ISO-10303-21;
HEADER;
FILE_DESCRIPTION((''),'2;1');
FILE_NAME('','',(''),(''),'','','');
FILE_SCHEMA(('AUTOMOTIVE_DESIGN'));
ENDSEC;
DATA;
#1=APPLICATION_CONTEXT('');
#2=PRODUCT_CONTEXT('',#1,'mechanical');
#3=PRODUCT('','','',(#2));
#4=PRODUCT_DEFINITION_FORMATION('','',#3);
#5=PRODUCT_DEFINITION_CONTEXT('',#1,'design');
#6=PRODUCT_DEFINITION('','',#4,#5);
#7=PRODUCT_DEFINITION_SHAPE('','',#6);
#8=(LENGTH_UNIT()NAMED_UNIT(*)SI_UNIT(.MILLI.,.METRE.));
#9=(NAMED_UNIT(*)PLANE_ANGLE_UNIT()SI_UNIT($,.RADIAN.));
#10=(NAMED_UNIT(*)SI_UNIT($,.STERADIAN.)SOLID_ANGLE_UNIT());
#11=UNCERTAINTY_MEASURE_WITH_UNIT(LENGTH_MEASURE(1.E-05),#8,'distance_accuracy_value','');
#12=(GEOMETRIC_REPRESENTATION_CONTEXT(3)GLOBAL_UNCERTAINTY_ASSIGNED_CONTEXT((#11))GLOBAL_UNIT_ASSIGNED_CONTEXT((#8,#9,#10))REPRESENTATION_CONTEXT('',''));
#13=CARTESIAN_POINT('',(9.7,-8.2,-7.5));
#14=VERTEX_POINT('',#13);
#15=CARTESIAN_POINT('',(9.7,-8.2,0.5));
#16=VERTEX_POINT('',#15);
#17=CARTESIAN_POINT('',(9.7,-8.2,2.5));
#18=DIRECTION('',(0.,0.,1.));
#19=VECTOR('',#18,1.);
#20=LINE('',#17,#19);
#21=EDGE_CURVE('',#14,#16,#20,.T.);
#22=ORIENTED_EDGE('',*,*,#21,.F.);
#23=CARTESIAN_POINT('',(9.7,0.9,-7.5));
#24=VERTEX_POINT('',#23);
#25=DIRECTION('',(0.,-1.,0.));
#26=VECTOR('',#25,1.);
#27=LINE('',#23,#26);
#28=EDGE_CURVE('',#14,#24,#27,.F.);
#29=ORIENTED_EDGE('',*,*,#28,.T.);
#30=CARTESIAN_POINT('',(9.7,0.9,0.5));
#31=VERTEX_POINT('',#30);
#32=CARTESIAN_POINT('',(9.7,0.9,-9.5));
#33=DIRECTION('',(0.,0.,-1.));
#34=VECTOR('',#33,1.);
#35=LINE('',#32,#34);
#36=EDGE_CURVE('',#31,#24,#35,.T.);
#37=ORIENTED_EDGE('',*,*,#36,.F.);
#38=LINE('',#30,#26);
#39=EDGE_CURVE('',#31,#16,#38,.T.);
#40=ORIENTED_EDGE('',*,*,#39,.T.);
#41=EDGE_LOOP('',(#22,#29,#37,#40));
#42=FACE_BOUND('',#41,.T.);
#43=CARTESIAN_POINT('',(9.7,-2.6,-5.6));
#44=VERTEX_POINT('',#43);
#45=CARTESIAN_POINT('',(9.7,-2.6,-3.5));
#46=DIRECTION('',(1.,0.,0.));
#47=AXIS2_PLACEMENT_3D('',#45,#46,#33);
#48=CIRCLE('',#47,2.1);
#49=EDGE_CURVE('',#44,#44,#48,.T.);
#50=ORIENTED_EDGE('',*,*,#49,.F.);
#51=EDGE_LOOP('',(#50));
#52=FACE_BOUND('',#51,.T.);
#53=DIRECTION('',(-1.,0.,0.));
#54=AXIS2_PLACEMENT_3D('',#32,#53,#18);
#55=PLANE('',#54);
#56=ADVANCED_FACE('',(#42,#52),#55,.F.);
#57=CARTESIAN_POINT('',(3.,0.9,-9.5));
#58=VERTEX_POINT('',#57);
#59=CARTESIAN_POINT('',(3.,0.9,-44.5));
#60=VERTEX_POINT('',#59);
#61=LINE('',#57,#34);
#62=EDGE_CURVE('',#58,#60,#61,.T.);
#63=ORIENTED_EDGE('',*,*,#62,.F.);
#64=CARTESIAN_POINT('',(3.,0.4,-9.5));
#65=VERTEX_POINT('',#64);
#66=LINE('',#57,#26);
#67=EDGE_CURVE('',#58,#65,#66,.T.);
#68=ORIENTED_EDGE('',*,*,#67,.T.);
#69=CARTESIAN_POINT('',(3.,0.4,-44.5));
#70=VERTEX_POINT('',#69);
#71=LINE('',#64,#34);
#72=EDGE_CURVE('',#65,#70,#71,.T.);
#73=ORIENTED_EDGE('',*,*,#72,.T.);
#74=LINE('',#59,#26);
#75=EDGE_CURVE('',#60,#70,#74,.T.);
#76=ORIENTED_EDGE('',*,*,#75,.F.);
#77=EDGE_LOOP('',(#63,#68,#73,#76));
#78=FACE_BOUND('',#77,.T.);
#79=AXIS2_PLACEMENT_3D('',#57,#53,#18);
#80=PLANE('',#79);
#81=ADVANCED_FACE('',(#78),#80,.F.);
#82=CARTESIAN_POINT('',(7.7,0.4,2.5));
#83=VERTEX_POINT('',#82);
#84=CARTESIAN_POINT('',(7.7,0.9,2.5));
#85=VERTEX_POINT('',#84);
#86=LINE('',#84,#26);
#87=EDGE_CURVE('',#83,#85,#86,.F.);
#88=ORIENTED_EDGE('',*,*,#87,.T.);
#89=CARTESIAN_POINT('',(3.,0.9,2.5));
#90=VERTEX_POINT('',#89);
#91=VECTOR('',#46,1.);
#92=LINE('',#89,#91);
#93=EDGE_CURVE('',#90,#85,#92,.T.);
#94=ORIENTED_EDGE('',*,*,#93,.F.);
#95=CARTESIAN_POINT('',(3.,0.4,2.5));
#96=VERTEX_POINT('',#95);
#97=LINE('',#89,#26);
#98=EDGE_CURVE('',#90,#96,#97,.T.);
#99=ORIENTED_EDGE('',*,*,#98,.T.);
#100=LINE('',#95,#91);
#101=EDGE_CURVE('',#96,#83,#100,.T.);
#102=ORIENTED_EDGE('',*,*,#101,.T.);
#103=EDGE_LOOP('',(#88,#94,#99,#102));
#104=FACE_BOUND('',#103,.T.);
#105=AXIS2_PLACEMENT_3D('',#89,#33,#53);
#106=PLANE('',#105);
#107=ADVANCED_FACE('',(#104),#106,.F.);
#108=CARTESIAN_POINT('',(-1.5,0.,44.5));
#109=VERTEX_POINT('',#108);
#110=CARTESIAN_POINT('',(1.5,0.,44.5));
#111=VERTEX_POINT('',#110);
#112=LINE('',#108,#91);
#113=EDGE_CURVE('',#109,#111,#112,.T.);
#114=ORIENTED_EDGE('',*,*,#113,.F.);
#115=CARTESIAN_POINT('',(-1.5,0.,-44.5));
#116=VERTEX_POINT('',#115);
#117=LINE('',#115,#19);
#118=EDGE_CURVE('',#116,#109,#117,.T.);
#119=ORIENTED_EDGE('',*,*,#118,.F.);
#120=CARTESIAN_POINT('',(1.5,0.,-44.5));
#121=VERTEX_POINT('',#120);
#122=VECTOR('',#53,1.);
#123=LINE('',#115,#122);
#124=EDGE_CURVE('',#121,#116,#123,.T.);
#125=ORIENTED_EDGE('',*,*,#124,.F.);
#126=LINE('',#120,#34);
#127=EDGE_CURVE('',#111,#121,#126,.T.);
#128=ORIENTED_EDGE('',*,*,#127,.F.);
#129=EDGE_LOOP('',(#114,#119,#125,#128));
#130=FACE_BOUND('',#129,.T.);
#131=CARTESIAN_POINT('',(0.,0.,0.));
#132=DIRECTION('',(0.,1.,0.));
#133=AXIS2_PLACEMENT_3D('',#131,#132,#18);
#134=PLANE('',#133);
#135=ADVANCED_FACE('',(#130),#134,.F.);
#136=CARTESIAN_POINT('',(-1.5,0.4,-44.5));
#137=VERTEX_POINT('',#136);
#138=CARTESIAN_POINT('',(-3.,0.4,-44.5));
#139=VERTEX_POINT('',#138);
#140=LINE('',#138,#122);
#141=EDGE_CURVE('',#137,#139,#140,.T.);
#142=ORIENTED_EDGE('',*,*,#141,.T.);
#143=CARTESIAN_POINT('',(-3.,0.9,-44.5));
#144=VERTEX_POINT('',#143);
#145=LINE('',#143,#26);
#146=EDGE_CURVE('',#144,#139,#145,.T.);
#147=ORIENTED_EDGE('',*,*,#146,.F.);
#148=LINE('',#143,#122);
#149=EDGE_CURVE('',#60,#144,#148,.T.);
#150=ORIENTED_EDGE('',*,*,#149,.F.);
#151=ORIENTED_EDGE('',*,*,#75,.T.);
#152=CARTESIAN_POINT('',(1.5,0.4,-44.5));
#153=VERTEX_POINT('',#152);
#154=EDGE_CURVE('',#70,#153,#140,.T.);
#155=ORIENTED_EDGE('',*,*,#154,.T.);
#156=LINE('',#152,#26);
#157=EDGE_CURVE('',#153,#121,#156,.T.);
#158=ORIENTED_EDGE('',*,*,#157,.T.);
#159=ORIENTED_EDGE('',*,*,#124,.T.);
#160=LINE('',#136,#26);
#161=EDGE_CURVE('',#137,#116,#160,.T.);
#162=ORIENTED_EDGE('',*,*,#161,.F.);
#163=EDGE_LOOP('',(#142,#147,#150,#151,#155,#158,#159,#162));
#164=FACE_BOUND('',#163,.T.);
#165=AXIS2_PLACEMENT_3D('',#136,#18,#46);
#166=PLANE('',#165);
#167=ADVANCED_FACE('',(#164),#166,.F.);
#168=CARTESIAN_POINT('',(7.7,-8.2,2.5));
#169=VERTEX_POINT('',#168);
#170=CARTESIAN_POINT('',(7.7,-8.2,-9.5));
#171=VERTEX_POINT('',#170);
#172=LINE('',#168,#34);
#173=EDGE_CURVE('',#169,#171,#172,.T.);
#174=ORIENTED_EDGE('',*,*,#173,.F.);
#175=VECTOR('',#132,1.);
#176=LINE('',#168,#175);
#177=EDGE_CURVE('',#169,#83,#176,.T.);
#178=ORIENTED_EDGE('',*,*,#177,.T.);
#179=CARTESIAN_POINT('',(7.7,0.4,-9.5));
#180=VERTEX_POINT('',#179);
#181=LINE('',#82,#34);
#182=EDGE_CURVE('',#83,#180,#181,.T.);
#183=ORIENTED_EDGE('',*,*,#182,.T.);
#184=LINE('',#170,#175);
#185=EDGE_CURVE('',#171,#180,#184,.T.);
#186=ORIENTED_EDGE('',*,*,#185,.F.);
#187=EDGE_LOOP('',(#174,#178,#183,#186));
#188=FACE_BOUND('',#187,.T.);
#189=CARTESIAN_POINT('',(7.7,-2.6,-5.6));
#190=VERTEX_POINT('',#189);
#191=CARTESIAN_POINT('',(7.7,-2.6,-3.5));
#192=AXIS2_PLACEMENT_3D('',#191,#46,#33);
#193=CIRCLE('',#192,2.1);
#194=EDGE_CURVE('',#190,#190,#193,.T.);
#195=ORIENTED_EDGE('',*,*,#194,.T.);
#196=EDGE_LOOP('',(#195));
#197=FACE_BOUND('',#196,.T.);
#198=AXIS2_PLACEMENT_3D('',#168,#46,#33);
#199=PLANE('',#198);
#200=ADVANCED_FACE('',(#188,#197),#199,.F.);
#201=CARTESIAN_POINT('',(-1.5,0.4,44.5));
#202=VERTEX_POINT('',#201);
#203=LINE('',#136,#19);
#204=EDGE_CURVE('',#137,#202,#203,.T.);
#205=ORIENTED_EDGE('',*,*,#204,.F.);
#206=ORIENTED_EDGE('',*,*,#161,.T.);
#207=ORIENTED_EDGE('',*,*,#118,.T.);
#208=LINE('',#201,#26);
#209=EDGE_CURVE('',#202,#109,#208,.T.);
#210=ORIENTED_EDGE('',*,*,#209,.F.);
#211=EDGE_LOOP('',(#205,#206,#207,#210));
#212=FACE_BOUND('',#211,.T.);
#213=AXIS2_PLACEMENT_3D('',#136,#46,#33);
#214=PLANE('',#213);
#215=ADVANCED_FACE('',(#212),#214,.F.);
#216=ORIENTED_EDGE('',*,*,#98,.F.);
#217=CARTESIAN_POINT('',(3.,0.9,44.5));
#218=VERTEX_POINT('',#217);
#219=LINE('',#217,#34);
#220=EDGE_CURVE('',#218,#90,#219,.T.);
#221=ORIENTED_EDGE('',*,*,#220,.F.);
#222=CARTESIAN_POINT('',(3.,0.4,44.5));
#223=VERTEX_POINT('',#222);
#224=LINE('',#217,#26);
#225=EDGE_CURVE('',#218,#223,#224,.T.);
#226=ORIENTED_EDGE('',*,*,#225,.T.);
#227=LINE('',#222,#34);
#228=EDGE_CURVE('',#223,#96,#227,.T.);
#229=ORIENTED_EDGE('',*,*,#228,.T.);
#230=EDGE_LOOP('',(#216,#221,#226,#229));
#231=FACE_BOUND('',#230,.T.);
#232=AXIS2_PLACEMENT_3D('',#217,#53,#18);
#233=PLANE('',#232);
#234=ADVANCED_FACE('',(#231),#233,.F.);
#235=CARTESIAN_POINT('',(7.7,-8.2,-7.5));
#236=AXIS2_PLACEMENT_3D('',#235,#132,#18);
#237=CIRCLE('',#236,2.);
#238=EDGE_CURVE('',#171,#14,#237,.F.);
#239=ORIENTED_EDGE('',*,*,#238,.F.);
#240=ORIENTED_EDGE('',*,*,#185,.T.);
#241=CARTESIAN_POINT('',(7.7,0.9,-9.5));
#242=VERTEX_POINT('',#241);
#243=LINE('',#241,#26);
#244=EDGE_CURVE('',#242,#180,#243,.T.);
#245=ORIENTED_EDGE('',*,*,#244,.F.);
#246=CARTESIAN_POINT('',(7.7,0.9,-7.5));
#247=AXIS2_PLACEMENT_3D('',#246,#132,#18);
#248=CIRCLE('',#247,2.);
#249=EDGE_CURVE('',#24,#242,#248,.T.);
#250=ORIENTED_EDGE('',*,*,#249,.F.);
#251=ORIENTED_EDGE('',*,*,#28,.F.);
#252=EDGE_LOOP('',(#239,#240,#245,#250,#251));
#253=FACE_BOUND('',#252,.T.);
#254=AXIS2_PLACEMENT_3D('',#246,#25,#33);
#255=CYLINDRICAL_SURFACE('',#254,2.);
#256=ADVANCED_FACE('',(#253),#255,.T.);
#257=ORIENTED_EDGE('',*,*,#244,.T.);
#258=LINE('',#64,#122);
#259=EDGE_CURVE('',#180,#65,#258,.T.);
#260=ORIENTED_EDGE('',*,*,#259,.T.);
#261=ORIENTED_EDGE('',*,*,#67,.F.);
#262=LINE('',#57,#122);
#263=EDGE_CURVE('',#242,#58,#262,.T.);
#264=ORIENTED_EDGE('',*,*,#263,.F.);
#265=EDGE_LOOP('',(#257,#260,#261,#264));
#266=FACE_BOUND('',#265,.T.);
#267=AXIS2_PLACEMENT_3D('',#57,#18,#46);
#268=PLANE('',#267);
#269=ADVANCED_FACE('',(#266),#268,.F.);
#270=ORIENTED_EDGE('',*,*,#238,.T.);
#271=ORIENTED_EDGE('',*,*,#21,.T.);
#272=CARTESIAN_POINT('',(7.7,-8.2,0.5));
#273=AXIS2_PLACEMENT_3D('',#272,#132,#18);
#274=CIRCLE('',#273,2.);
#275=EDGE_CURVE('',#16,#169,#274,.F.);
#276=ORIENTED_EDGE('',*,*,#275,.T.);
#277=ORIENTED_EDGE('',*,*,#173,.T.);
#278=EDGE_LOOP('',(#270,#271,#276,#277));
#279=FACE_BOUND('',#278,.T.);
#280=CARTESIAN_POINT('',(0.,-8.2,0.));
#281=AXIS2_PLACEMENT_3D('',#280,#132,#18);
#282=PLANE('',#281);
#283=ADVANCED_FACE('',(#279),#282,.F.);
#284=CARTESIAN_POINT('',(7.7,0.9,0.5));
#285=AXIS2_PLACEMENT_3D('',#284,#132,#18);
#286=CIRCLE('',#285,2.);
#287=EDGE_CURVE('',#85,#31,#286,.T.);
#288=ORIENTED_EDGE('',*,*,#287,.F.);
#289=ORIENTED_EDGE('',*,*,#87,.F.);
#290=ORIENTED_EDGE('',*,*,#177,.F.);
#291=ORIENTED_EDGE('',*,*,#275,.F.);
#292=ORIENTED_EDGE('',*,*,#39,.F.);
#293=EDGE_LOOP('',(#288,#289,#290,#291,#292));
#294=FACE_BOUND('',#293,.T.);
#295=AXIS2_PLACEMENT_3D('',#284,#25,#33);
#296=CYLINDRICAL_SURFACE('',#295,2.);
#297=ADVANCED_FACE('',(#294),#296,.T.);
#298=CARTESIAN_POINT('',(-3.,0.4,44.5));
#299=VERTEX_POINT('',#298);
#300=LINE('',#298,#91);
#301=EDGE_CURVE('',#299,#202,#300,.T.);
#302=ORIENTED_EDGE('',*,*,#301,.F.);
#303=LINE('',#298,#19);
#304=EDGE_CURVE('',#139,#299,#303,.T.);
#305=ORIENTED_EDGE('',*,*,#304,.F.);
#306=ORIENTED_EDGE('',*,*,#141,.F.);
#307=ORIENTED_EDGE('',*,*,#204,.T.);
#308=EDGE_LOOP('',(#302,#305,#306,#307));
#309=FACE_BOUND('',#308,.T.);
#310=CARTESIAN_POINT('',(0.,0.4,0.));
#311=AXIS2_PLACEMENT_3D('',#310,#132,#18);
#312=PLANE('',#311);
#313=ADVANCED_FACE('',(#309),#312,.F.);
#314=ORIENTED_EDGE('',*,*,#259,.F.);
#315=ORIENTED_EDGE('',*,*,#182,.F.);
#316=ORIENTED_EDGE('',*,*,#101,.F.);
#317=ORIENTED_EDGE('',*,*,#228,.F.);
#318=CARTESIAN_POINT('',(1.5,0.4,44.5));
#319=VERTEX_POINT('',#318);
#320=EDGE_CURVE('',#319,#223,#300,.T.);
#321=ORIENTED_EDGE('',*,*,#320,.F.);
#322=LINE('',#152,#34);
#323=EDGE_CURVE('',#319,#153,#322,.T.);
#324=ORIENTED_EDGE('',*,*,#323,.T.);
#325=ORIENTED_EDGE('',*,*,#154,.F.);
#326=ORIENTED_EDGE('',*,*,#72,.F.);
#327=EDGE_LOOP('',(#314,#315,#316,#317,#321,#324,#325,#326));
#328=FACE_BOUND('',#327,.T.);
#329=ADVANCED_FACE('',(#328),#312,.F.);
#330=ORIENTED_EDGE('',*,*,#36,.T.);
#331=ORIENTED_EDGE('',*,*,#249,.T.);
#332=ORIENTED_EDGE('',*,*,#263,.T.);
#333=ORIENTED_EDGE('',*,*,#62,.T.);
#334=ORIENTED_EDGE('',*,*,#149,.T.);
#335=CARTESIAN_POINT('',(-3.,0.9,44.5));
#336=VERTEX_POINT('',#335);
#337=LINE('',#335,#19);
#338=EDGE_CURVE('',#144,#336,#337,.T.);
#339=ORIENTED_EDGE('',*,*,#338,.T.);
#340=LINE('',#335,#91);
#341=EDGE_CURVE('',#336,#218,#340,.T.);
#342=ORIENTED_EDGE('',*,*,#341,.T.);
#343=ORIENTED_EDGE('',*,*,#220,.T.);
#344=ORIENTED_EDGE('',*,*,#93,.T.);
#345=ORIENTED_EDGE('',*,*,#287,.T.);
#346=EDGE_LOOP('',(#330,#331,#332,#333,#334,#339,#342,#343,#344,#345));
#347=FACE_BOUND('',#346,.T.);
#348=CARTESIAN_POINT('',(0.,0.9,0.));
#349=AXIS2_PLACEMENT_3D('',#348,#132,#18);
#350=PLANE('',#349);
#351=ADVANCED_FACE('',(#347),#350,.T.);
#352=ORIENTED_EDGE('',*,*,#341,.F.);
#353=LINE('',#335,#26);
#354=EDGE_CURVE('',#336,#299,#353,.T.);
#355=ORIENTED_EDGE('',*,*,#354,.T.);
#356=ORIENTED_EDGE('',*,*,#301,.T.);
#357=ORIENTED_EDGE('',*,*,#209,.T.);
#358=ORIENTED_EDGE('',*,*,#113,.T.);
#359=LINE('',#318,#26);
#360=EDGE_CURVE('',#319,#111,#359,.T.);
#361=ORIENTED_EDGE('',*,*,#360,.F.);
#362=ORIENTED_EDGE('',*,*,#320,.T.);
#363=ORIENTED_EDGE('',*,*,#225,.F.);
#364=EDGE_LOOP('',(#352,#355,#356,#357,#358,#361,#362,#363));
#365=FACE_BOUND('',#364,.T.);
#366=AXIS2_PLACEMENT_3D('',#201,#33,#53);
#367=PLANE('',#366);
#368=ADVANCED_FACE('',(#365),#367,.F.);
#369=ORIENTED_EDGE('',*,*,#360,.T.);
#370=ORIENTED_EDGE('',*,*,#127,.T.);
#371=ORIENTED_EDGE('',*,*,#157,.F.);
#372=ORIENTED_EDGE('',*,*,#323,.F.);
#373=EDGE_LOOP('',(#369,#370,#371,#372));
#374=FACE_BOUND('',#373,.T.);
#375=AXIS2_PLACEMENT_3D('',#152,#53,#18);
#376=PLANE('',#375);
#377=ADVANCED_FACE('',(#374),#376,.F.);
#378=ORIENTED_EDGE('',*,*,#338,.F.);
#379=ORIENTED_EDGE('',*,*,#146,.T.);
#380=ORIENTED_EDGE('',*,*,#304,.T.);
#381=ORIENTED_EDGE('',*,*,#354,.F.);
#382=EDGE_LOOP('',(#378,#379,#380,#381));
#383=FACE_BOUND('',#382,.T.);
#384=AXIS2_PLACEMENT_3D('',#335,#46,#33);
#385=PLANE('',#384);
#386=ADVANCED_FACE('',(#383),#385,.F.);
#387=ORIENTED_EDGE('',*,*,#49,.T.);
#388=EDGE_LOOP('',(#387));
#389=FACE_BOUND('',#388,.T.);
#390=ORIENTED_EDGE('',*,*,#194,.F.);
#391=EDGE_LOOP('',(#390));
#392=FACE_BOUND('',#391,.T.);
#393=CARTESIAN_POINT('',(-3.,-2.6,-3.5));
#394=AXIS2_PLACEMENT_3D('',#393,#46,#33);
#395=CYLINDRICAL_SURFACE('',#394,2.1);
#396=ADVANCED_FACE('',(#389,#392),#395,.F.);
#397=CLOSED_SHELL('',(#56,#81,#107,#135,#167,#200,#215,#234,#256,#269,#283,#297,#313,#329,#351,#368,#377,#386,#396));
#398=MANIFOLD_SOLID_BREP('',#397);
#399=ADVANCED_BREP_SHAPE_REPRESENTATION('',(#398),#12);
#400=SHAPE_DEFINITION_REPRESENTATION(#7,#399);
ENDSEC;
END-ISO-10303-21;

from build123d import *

# Parameters (mm, degrees)
SKETCH1_W           = 3
SKETCH1_H           = 89
BOSS_EXTRUDE1_DEPTH = 0.4
BOSS_EXTRUDE2_DEPTH = 0.5
SKETCH3_W           = 2
SKETCH3_H           = 12
BOSS_EXTRUDE3_DEPTH = 8.6
FILLET1_R           = 2
SKETCH4_R           = 2.1
CUT_EXTRUDE1_DEPTH  = 47.997659516


with BuildPart() as part:
    # Sketch1 → Boss-Extrude1 (new body)
    with BuildSketch(Plane(origin=(0, 0, 0), x_dir=(1, 0, 0), z_dir=(0, 1, 0))):
        Rectangle(SKETCH1_W, SKETCH1_H)
    extrude(amount=BOSS_EXTRUDE1_DEPTH)

    # Sketch2 → Boss-Extrude2 (add)
    with BuildSketch(Plane(origin=(0, 0.4, 0), x_dir=(1, 0, 0), z_dir=(0, 1, 0))):
        Polygon((3, 9.5), (3, 44.5), (-3, 44.5), (-3, -44.5), (3, -44.5), (3, -2.5), (9.7, -2.5), (9.7, 9.5), align=None)
    extrude(amount=BOSS_EXTRUDE2_DEPTH)

    # Sketch3 → Boss-Extrude3 (add)
    with BuildSketch(Plane.XZ.offset(-0.4)):
        with Locations((8.7, -3.5)):
            Rectangle(SKETCH3_W, SKETCH3_H)
    extrude(amount=BOSS_EXTRUDE3_DEPTH)

    # Fillet1
    fillet1_edges = [part.edges().sort_by_distance(p)[0] for p in [
        (9.7, -3.65, 2.5),
        (9.7, -3.65, -9.5),
    ]]
    fillet(fillet1_edges, radius=FILLET1_R - 0.0001)  # a hair under: the kernel refuses the full size

    # Sketch4 → Cut-Extrude1 (cut, through all)
    with BuildSketch(Plane(origin=(9.7, 0, 0), x_dir=(0, 0, -1), z_dir=(1, 0, 0))):
        with Locations((3.5, -2.6)):
            Circle(SKETCH4_R)
    extrude(amount=-CUT_EXTRUDE1_DEPTH, mode=Mode.SUBTRACT)


solid = part.part
